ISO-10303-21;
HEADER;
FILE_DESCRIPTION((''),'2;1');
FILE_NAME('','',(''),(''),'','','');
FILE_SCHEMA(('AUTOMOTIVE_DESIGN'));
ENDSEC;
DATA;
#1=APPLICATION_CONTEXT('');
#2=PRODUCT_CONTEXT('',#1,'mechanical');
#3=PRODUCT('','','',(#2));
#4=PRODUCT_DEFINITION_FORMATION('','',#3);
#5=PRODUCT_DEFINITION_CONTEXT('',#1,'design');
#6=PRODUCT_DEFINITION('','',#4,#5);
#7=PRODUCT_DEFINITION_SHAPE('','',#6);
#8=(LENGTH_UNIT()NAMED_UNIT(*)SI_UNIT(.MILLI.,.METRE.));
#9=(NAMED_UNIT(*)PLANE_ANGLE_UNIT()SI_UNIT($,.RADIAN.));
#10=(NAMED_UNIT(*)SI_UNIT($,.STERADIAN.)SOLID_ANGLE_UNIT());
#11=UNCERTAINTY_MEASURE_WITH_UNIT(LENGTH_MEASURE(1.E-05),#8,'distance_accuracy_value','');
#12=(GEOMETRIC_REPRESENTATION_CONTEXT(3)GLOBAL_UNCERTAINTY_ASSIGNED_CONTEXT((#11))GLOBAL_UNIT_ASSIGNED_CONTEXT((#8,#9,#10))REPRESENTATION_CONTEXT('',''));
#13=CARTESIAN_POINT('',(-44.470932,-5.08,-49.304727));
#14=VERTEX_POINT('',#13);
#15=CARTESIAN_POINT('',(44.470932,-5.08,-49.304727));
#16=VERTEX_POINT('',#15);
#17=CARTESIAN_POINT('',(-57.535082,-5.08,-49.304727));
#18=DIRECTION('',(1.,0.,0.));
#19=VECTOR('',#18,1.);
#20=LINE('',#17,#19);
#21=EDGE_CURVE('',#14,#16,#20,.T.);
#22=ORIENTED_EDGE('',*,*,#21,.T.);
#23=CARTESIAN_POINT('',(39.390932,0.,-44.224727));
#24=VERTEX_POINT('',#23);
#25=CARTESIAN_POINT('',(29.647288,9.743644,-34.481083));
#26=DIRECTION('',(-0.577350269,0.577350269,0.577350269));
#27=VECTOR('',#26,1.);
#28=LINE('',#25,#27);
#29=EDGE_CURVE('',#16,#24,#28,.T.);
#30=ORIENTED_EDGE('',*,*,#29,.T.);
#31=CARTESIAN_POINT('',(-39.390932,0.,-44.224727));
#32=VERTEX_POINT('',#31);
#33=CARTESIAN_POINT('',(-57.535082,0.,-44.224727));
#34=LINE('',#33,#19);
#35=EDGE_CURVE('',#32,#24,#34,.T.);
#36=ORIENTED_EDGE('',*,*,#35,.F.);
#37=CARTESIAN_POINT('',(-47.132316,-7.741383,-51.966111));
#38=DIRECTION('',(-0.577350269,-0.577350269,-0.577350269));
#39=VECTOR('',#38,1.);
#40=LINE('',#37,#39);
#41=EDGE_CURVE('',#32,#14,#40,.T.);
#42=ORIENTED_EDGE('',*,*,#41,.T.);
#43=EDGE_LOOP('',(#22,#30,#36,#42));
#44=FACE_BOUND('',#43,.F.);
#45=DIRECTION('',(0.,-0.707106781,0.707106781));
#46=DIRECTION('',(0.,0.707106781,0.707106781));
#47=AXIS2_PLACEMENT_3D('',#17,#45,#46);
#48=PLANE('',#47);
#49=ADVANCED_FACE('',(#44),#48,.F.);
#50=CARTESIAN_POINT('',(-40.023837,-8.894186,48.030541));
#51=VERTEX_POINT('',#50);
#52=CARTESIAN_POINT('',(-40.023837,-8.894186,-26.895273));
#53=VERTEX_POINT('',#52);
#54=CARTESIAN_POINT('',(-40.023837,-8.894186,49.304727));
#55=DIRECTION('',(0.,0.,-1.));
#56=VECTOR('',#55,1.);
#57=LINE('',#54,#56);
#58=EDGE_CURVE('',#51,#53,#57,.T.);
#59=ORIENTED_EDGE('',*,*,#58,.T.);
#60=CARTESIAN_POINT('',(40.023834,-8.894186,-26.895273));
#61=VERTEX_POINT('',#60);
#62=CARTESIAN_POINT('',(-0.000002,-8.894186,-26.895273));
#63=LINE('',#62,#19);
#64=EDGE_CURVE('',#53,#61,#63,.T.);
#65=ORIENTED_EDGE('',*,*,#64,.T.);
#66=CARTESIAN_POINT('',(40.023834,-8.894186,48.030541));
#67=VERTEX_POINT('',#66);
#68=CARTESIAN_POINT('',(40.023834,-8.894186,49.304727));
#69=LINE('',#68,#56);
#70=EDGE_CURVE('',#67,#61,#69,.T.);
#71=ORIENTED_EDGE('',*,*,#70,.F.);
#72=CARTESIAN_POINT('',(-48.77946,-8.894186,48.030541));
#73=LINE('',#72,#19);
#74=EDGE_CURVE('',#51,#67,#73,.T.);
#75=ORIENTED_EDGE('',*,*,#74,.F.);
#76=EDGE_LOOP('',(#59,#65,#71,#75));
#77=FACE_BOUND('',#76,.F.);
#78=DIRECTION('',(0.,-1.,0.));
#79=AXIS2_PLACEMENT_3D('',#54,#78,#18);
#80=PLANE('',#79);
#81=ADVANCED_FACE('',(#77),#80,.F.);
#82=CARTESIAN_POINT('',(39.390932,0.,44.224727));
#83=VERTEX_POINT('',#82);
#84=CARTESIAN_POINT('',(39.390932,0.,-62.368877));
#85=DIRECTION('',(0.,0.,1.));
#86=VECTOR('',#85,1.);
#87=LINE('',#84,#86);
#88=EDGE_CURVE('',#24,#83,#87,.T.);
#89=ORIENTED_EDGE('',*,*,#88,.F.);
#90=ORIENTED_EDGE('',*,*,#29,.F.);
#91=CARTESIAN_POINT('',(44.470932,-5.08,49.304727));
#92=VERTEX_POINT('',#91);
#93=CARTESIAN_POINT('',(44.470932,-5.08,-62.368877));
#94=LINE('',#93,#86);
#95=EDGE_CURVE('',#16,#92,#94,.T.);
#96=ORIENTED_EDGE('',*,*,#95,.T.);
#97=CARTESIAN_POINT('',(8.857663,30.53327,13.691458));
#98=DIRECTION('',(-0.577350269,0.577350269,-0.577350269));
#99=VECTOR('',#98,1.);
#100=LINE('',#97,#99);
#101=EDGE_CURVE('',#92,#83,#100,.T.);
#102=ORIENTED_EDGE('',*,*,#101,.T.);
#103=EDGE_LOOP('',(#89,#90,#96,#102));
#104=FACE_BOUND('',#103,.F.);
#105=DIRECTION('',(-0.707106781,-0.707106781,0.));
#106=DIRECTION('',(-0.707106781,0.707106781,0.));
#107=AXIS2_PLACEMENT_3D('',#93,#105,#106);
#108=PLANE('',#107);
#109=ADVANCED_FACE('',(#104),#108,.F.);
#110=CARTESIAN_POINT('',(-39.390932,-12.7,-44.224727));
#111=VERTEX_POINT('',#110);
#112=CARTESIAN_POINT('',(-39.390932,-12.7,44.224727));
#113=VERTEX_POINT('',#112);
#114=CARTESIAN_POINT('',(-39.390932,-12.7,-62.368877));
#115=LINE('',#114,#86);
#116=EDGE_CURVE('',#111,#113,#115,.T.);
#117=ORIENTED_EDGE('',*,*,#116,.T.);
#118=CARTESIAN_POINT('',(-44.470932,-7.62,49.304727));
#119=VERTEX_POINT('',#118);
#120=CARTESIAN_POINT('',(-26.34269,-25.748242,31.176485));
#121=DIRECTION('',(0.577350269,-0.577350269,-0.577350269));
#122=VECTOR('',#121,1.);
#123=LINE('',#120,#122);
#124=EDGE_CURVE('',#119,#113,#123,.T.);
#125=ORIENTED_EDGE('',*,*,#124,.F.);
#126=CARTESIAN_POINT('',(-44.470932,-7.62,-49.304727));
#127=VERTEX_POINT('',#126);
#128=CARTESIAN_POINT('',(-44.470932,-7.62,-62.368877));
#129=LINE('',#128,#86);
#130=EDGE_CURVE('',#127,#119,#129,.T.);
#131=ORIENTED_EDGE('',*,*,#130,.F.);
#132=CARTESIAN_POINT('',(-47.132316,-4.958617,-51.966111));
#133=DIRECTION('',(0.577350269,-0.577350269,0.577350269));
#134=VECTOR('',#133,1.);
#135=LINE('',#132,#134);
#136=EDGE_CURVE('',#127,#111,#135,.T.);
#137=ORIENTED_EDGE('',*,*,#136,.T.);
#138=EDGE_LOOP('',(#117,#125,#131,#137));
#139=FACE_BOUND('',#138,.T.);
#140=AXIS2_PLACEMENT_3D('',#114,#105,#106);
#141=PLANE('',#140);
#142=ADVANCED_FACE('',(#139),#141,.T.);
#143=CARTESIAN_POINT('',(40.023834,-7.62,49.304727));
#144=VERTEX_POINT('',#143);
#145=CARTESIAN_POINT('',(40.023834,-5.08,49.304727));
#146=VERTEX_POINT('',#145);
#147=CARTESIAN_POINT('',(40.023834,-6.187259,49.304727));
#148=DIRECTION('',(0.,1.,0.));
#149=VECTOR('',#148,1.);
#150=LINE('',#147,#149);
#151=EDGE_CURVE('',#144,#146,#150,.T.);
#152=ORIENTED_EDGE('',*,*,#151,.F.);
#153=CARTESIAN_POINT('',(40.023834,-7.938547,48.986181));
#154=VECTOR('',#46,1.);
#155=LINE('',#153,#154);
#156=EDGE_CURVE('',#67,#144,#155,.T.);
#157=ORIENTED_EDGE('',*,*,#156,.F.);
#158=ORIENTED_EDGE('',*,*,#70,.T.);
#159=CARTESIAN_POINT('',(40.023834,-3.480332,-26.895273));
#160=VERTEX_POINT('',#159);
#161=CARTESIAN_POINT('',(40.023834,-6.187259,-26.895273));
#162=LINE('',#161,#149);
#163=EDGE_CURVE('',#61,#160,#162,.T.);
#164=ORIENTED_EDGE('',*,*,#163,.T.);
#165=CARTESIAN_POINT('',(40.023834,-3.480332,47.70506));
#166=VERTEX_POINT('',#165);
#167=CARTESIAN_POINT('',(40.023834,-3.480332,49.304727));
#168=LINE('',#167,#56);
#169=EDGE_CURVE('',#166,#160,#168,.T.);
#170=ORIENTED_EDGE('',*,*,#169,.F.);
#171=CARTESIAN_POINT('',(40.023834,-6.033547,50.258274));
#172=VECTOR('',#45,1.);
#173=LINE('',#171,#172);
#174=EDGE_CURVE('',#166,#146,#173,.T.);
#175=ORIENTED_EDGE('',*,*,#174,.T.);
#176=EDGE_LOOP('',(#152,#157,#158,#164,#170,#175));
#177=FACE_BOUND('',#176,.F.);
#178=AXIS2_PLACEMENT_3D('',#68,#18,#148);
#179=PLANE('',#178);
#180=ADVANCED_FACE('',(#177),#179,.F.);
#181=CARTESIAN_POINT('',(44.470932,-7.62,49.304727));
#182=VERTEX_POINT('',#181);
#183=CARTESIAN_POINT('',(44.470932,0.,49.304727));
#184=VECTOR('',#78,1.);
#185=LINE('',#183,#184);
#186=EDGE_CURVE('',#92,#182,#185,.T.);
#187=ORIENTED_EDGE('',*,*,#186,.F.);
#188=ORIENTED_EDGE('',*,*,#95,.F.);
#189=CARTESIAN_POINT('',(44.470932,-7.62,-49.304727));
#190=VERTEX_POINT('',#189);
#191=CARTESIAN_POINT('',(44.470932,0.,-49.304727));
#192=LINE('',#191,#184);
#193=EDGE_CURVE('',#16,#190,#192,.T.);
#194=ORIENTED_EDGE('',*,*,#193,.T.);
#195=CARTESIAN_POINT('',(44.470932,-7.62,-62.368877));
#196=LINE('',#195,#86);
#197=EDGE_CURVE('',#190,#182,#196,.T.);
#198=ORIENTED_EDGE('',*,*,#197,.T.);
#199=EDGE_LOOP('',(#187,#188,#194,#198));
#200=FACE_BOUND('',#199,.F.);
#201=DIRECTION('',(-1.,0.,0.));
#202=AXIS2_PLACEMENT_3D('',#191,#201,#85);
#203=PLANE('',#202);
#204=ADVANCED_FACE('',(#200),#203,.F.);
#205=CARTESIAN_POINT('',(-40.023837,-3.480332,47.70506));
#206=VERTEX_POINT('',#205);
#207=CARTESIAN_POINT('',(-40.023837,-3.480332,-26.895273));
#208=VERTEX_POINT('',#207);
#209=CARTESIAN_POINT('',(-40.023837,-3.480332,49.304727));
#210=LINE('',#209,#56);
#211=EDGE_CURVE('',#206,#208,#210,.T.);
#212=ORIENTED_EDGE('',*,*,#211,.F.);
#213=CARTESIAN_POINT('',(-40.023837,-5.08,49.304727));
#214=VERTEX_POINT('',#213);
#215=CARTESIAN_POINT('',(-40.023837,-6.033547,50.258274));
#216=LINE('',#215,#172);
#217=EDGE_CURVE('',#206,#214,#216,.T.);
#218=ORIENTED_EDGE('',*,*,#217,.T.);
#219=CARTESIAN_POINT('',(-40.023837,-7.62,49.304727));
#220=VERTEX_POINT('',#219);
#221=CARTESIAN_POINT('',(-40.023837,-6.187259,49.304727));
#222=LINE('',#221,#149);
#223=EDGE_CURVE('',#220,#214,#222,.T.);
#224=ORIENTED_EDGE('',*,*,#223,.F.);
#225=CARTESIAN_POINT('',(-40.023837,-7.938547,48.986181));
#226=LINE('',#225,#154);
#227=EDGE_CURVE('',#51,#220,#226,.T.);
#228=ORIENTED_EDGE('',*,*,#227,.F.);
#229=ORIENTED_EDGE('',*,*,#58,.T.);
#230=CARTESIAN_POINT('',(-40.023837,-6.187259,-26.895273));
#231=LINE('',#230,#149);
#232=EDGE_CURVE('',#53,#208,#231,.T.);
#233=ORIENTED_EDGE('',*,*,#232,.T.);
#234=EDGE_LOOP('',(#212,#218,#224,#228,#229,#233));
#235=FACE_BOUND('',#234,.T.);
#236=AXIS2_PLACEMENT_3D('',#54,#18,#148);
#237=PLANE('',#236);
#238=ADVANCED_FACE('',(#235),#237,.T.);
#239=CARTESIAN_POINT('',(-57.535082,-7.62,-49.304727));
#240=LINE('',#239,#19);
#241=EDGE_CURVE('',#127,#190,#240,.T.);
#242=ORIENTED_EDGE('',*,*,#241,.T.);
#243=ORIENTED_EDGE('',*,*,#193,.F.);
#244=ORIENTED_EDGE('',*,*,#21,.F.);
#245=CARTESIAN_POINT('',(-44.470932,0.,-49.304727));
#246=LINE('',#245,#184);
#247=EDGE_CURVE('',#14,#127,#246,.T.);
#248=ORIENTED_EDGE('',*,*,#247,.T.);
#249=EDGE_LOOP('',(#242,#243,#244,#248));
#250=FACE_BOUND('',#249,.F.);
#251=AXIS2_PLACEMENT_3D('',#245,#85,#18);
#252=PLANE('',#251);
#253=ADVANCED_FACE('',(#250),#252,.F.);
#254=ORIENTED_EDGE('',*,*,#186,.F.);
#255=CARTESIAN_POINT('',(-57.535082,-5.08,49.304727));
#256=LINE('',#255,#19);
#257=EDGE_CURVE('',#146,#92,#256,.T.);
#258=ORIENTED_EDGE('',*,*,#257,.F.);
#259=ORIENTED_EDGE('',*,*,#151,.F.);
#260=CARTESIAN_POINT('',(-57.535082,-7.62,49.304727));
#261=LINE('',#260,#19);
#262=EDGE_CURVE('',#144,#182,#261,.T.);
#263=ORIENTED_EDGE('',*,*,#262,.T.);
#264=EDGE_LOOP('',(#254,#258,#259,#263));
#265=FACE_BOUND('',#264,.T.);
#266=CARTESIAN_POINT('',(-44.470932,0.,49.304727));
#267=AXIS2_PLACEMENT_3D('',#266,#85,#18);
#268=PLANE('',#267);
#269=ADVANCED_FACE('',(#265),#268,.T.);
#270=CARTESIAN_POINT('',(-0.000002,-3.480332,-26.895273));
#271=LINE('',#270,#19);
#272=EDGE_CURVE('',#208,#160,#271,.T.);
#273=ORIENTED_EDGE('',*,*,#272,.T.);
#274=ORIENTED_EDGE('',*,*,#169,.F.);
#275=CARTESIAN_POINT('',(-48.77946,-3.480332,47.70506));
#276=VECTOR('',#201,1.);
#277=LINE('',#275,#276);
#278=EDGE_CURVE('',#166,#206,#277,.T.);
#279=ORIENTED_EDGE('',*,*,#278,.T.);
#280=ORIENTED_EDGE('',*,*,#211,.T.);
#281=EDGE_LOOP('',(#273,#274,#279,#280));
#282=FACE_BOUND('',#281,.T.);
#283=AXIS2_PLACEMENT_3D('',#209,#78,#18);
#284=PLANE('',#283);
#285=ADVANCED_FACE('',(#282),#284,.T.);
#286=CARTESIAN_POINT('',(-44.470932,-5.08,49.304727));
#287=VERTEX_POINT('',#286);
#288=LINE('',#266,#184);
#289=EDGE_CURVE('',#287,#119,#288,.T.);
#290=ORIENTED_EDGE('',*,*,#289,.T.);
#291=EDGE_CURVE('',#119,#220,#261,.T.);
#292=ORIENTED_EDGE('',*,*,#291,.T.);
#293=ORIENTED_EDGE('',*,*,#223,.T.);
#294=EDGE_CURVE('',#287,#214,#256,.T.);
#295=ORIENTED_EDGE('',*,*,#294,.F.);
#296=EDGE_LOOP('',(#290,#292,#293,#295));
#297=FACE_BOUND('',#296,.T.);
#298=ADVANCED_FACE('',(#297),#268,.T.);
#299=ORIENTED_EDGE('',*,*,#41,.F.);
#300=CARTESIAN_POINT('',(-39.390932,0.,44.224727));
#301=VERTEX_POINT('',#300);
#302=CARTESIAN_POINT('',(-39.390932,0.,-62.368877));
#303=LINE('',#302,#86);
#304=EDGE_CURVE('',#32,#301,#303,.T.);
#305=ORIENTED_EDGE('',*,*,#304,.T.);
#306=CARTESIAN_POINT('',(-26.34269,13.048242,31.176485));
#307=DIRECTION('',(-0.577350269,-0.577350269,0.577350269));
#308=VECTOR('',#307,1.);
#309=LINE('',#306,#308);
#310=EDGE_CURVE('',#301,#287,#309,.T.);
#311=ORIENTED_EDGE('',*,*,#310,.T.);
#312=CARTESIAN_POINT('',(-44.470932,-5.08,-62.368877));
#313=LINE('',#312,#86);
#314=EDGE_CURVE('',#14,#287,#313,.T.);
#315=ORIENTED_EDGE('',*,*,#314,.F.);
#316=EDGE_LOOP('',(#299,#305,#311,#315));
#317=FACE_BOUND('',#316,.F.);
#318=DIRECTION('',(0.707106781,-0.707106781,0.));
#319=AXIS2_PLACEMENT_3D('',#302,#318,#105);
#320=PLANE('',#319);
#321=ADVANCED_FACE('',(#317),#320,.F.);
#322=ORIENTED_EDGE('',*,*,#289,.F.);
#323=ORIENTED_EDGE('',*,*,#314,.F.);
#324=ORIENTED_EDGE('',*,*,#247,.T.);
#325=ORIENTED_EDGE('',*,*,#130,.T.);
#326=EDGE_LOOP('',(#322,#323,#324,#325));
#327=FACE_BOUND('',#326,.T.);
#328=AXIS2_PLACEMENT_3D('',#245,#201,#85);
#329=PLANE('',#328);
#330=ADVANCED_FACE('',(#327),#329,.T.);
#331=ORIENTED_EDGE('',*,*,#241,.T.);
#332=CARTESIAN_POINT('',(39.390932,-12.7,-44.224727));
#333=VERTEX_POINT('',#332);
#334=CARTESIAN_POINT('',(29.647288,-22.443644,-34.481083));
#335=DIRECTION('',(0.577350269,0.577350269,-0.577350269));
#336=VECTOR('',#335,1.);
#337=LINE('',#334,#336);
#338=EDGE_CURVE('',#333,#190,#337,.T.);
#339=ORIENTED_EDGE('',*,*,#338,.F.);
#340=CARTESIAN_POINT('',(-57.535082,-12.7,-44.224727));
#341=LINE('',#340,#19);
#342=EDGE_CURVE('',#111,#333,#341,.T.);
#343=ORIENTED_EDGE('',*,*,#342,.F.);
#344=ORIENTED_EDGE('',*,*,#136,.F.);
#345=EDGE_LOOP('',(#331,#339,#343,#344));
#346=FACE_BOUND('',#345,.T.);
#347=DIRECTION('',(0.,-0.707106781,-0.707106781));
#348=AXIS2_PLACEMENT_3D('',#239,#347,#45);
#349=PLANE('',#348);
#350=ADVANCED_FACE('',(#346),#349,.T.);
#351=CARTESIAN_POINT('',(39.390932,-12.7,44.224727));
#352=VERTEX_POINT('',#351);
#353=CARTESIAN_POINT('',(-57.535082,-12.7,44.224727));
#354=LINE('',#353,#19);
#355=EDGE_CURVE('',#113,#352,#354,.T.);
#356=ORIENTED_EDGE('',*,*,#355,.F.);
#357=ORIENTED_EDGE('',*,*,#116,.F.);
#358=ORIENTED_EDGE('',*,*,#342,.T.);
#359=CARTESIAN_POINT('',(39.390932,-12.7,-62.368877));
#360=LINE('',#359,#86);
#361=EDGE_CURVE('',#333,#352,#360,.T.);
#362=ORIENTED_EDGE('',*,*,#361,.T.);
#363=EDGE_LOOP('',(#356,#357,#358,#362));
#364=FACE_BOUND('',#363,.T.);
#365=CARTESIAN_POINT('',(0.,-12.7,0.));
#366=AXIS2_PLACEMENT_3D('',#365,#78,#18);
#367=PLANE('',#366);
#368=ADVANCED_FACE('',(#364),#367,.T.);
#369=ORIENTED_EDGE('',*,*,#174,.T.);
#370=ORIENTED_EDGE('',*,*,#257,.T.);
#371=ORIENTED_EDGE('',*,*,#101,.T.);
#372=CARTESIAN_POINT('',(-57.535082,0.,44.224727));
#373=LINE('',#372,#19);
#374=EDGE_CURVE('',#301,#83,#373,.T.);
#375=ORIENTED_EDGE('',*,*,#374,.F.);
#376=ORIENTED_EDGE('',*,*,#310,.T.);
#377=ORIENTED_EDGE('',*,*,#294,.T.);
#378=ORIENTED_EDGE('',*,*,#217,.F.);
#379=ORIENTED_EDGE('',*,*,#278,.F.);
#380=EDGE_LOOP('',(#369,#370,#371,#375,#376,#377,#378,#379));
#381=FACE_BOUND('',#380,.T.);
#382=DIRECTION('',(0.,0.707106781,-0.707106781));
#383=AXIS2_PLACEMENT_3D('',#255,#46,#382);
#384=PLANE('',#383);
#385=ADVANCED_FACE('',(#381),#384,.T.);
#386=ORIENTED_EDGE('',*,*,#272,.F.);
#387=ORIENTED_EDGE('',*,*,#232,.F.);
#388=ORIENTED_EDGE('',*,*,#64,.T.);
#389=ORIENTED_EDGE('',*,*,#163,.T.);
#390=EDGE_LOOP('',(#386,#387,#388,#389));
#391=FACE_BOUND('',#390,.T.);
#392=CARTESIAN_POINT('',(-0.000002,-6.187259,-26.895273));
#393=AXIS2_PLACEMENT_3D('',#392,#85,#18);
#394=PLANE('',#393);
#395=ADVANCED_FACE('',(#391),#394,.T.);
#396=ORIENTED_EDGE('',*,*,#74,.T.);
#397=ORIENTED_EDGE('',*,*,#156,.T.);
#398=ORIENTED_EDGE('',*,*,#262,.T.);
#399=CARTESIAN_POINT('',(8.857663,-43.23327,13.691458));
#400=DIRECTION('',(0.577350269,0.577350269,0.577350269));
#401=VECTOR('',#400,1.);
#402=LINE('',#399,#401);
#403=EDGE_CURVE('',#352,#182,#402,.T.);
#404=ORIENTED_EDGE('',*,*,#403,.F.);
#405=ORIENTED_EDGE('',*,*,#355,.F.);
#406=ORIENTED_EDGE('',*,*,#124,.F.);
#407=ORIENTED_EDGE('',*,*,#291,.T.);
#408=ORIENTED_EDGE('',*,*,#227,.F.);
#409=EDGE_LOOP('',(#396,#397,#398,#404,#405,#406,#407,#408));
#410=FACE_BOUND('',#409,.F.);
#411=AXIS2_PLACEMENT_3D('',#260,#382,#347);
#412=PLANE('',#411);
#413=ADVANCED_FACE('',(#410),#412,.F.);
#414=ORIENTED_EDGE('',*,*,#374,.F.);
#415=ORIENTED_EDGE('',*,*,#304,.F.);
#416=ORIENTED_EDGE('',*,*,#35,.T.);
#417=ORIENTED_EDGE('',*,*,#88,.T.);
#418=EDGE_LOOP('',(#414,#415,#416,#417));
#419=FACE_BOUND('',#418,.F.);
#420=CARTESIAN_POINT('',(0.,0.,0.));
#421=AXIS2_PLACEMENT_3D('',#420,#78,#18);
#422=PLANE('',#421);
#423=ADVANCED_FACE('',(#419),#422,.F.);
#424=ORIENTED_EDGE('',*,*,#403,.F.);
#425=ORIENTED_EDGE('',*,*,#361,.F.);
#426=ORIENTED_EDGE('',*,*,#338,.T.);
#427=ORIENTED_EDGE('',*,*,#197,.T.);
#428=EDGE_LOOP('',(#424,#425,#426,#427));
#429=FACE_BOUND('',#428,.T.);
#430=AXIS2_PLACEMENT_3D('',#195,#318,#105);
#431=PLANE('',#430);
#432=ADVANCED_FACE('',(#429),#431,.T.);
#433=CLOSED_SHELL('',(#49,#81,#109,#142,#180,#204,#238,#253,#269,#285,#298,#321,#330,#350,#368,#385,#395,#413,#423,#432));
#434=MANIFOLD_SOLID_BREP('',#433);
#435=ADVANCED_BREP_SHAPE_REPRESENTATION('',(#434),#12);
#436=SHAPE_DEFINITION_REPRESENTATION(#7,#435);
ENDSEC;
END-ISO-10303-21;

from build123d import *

# Parameters (mm, degrees)
F0_W        = 88.9418646693
F0_H        = 98.6094549298
F1_DEPTH    = 12.7
F2_W        = 80.0476707518
F2_H        = 5.413854029
F3_DEPTH    = 76.2
F4_T1_DEPTH = 124.7377540876
F4_T3_DEPTH = 115.0701638271


# Not quite as in the source:
# - a fillet or chamfer that OpenCascade refuses, or shapes differently, is made with other operations: its cross-section is extruded or revolved along the edge and cut away or added


with BuildPart() as f1:
    # F0 (on Front) → F1 (new body)
    with BuildSketch(Plane.XZ):
        Rectangle(F0_W, F0_H)
    extrude(amount=F1_DEPTH)

    # F2 (on face) → F3 (cut)
    with BuildSketch(Plane.XY.offset(49.3047274649)):
        with Locations((-1.8626e-06, -6.1872594524)):
            Rectangle(F2_W, F2_H)
    extrude(amount=-F3_DEPTH, mode=Mode.SUBTRACT)

    # F4: chamfer of 5.08 on 8 edges, made by hand

    # F4_s2 → F4_t1 (cut)
    with BuildSketch(Plane.XY.offset(-62.3688770438)):
        Polygon((44.4709323347, -5.08), (39.3909323347, 0), (44.4709323347, 0), align=None)
        Polygon((-39.3909323347, 0), (-44.4709323347, -5.08), (-44.4709323347, 0), align=None)
        Polygon((44.4709323347, -7.62), (39.3909323347, -12.7), (44.4709323347, -12.7), align=None)
        Polygon((-39.3909323347, -12.7), (-44.4709323347, -7.62), (-44.4709323347, -12.7), align=None)
    extrude(amount=F4_T1_DEPTH, mode=Mode.SUBTRACT)

    # F4_s4 → F4_t3 (cut)
    with BuildSketch(Plane.YZ.offset(-57.5350819135)):
        Polygon((-5.08, 49.3047274649), (0, 44.2247274649), (0, 49.3047274649), align=None)
        Polygon((-5.08, -49.3047274649), (0, -44.2247274649), (0, -49.3047274649), align=None)
        Polygon((-7.62, 49.3047274649), (-12.7, 44.2247274649), (-12.7, 49.3047274649), align=None)
        Polygon((-7.62, -49.3047274649), (-12.7, -44.2247274649), (-12.7, -49.3047274649), align=None)
    extrude(amount=F4_T3_DEPTH, mode=Mode.SUBTRACT)


solid = f1.part
